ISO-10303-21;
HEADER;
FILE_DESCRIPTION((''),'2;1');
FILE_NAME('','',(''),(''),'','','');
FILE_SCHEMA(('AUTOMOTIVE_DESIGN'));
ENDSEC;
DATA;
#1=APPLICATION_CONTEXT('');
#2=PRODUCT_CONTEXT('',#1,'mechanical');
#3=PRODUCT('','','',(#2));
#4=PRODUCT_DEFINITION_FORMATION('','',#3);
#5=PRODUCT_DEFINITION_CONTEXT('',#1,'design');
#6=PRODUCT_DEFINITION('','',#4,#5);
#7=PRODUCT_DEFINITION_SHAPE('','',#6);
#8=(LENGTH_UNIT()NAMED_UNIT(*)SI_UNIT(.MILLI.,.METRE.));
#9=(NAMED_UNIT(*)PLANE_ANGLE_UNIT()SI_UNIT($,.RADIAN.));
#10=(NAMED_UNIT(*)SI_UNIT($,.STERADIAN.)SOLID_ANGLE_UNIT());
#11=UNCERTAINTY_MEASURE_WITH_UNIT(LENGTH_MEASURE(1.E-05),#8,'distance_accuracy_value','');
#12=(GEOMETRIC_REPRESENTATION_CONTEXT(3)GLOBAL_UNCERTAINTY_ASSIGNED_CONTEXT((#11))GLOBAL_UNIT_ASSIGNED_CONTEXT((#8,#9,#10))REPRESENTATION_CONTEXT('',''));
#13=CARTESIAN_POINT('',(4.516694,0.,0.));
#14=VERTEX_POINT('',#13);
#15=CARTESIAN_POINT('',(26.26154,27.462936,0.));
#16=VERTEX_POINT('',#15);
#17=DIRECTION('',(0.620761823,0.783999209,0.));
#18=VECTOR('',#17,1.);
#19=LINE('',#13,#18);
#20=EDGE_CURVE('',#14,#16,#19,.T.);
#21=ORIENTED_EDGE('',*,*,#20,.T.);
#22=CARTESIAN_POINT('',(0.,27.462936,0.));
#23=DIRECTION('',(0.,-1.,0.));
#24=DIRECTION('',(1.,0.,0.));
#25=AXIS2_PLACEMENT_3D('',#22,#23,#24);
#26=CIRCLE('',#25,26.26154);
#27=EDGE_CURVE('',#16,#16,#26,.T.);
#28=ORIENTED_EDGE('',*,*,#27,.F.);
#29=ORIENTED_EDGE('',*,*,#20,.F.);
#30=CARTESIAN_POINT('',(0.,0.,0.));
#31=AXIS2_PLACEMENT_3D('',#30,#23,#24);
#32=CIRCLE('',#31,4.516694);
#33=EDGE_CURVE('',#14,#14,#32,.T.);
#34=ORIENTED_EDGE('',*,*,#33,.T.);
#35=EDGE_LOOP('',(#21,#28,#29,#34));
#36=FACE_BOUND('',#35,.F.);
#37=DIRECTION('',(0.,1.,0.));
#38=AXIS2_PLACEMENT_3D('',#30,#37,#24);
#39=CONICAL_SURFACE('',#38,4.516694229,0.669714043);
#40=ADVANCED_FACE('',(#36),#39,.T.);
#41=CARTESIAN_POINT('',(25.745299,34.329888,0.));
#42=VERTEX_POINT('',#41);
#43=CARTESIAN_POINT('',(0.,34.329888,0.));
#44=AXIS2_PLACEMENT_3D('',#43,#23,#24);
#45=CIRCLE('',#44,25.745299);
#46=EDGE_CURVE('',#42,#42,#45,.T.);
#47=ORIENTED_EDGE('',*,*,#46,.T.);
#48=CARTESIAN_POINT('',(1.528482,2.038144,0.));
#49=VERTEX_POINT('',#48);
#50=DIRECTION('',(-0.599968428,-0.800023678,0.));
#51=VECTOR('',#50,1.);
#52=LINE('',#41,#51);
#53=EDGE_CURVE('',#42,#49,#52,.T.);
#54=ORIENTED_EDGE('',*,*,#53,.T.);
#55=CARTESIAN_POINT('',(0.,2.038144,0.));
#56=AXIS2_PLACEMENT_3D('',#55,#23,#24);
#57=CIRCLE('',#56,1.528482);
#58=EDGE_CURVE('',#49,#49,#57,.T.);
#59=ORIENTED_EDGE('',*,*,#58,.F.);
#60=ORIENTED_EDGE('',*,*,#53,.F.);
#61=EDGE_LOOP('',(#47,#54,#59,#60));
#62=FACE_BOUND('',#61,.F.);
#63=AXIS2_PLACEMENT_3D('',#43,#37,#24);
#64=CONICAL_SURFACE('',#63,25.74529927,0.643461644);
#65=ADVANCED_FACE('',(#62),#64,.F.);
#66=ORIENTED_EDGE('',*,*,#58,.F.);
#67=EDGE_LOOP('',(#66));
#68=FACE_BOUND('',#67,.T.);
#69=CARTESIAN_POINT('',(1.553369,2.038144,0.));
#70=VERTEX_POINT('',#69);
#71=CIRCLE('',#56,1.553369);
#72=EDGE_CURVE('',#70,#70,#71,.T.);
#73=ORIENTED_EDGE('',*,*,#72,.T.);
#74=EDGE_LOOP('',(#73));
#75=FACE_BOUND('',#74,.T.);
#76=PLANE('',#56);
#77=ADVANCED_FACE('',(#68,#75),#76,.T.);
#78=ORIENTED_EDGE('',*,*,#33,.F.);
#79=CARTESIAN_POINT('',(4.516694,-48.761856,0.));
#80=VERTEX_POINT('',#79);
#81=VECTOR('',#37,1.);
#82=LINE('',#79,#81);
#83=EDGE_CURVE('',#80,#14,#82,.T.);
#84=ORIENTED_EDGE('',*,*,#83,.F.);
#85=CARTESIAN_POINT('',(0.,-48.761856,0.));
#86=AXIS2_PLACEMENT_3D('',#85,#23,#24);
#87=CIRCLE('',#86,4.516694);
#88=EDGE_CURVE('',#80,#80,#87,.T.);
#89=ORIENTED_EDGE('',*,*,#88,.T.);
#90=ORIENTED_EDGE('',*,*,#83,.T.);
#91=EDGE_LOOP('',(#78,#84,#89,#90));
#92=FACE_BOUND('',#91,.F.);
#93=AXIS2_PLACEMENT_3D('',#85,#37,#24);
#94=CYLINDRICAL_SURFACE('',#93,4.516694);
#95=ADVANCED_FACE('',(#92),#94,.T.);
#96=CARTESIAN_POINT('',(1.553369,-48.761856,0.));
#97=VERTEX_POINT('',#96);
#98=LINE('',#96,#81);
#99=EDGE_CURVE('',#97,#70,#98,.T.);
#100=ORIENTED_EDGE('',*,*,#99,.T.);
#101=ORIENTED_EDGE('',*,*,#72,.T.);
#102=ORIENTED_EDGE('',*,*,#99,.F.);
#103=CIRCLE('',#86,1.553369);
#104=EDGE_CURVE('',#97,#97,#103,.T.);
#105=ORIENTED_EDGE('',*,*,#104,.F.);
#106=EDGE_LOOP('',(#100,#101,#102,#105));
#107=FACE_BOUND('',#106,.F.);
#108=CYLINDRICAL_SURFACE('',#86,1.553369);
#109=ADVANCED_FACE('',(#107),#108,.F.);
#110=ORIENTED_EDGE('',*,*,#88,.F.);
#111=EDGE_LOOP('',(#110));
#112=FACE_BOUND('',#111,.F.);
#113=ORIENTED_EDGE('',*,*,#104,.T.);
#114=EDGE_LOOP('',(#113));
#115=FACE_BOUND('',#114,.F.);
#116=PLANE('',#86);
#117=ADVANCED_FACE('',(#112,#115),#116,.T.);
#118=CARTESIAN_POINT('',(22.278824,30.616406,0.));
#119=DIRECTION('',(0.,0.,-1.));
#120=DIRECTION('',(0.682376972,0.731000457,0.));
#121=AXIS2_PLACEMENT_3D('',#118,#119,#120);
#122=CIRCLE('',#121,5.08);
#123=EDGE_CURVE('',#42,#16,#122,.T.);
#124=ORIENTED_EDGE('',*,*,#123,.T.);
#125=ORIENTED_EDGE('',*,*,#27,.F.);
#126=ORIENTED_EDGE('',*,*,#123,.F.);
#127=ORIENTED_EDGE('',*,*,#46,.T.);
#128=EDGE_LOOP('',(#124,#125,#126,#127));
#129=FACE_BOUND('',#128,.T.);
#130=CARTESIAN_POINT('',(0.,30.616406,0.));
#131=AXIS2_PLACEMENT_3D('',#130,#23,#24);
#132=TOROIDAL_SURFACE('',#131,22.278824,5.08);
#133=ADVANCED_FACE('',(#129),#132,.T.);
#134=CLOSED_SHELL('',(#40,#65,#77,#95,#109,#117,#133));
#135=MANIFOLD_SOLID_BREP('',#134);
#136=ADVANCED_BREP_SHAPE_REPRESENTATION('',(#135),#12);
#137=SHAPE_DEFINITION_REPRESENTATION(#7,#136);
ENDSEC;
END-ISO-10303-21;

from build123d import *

# Parameters (mm, degrees)
F2_R     = 1.5533685179
F3_DEPTH = 50.8


# Not quite as in the source:
# - a fillet or chamfer that OpenCascade refuses, or shapes differently, is made with other operations: its cross-section is extruded or revolved along the edge and cut away or added


with BuildPart() as f1:
    # F0 (on Top) → F1 (revolve)
    with BuildSketch(Plane.XY):
        Polygon((25.7452992698, 34.3298881523), (0, 0), (0, -48.7618558109), (4.5166942291, -48.7618558109), (4.5166942291, 0), (29.4045954943, 31.4324982464), align=None)
    revolve(axis=Axis((0, -24.3809279054, 0), (0, -1, 0)))

    # F2 (on face) → F3 (cut)
    with BuildSketch(Plane.XZ.offset(48.7618558109)):
        Circle(F2_R)
    extrude(amount=-F3_DEPTH, mode=Mode.SUBTRACT)

    # F4: fillet of radius 5.08 on 1 edges, made by hand

    # F4_s1 → F4_t2 (revolve, cut)
    with BuildSketch(Plane.XY):
        with BuildLine():
            ThreePointArc((25.7452992698, 34.3298881523), (27.3445295723, 30.9972333724), (26.261540234, 27.4629357709))
            Line((26.261540234, 27.4629357709), (26.3411945536, 27.3998663697))
            Line((26.3411945536, 27.3998663697), (29.4842498139, 31.3694288452))
            Line((29.4842498139, 31.3694288452), (29.4676648955, 31.5121525661))
            ThreePointArc((29.4676648955, 31.5121525661), (27.6380167832, 32.960847519), (25.8146287701, 34.4041577987))
            Line((25.8146287701, 34.4041577987), (25.7452992698, 34.3298881523))
        make_face()
    revolve(axis=Axis((0, 31.4324982464, 0), (0, -1, 0)), mode=Mode.SUBTRACT)


solid = f1.part
